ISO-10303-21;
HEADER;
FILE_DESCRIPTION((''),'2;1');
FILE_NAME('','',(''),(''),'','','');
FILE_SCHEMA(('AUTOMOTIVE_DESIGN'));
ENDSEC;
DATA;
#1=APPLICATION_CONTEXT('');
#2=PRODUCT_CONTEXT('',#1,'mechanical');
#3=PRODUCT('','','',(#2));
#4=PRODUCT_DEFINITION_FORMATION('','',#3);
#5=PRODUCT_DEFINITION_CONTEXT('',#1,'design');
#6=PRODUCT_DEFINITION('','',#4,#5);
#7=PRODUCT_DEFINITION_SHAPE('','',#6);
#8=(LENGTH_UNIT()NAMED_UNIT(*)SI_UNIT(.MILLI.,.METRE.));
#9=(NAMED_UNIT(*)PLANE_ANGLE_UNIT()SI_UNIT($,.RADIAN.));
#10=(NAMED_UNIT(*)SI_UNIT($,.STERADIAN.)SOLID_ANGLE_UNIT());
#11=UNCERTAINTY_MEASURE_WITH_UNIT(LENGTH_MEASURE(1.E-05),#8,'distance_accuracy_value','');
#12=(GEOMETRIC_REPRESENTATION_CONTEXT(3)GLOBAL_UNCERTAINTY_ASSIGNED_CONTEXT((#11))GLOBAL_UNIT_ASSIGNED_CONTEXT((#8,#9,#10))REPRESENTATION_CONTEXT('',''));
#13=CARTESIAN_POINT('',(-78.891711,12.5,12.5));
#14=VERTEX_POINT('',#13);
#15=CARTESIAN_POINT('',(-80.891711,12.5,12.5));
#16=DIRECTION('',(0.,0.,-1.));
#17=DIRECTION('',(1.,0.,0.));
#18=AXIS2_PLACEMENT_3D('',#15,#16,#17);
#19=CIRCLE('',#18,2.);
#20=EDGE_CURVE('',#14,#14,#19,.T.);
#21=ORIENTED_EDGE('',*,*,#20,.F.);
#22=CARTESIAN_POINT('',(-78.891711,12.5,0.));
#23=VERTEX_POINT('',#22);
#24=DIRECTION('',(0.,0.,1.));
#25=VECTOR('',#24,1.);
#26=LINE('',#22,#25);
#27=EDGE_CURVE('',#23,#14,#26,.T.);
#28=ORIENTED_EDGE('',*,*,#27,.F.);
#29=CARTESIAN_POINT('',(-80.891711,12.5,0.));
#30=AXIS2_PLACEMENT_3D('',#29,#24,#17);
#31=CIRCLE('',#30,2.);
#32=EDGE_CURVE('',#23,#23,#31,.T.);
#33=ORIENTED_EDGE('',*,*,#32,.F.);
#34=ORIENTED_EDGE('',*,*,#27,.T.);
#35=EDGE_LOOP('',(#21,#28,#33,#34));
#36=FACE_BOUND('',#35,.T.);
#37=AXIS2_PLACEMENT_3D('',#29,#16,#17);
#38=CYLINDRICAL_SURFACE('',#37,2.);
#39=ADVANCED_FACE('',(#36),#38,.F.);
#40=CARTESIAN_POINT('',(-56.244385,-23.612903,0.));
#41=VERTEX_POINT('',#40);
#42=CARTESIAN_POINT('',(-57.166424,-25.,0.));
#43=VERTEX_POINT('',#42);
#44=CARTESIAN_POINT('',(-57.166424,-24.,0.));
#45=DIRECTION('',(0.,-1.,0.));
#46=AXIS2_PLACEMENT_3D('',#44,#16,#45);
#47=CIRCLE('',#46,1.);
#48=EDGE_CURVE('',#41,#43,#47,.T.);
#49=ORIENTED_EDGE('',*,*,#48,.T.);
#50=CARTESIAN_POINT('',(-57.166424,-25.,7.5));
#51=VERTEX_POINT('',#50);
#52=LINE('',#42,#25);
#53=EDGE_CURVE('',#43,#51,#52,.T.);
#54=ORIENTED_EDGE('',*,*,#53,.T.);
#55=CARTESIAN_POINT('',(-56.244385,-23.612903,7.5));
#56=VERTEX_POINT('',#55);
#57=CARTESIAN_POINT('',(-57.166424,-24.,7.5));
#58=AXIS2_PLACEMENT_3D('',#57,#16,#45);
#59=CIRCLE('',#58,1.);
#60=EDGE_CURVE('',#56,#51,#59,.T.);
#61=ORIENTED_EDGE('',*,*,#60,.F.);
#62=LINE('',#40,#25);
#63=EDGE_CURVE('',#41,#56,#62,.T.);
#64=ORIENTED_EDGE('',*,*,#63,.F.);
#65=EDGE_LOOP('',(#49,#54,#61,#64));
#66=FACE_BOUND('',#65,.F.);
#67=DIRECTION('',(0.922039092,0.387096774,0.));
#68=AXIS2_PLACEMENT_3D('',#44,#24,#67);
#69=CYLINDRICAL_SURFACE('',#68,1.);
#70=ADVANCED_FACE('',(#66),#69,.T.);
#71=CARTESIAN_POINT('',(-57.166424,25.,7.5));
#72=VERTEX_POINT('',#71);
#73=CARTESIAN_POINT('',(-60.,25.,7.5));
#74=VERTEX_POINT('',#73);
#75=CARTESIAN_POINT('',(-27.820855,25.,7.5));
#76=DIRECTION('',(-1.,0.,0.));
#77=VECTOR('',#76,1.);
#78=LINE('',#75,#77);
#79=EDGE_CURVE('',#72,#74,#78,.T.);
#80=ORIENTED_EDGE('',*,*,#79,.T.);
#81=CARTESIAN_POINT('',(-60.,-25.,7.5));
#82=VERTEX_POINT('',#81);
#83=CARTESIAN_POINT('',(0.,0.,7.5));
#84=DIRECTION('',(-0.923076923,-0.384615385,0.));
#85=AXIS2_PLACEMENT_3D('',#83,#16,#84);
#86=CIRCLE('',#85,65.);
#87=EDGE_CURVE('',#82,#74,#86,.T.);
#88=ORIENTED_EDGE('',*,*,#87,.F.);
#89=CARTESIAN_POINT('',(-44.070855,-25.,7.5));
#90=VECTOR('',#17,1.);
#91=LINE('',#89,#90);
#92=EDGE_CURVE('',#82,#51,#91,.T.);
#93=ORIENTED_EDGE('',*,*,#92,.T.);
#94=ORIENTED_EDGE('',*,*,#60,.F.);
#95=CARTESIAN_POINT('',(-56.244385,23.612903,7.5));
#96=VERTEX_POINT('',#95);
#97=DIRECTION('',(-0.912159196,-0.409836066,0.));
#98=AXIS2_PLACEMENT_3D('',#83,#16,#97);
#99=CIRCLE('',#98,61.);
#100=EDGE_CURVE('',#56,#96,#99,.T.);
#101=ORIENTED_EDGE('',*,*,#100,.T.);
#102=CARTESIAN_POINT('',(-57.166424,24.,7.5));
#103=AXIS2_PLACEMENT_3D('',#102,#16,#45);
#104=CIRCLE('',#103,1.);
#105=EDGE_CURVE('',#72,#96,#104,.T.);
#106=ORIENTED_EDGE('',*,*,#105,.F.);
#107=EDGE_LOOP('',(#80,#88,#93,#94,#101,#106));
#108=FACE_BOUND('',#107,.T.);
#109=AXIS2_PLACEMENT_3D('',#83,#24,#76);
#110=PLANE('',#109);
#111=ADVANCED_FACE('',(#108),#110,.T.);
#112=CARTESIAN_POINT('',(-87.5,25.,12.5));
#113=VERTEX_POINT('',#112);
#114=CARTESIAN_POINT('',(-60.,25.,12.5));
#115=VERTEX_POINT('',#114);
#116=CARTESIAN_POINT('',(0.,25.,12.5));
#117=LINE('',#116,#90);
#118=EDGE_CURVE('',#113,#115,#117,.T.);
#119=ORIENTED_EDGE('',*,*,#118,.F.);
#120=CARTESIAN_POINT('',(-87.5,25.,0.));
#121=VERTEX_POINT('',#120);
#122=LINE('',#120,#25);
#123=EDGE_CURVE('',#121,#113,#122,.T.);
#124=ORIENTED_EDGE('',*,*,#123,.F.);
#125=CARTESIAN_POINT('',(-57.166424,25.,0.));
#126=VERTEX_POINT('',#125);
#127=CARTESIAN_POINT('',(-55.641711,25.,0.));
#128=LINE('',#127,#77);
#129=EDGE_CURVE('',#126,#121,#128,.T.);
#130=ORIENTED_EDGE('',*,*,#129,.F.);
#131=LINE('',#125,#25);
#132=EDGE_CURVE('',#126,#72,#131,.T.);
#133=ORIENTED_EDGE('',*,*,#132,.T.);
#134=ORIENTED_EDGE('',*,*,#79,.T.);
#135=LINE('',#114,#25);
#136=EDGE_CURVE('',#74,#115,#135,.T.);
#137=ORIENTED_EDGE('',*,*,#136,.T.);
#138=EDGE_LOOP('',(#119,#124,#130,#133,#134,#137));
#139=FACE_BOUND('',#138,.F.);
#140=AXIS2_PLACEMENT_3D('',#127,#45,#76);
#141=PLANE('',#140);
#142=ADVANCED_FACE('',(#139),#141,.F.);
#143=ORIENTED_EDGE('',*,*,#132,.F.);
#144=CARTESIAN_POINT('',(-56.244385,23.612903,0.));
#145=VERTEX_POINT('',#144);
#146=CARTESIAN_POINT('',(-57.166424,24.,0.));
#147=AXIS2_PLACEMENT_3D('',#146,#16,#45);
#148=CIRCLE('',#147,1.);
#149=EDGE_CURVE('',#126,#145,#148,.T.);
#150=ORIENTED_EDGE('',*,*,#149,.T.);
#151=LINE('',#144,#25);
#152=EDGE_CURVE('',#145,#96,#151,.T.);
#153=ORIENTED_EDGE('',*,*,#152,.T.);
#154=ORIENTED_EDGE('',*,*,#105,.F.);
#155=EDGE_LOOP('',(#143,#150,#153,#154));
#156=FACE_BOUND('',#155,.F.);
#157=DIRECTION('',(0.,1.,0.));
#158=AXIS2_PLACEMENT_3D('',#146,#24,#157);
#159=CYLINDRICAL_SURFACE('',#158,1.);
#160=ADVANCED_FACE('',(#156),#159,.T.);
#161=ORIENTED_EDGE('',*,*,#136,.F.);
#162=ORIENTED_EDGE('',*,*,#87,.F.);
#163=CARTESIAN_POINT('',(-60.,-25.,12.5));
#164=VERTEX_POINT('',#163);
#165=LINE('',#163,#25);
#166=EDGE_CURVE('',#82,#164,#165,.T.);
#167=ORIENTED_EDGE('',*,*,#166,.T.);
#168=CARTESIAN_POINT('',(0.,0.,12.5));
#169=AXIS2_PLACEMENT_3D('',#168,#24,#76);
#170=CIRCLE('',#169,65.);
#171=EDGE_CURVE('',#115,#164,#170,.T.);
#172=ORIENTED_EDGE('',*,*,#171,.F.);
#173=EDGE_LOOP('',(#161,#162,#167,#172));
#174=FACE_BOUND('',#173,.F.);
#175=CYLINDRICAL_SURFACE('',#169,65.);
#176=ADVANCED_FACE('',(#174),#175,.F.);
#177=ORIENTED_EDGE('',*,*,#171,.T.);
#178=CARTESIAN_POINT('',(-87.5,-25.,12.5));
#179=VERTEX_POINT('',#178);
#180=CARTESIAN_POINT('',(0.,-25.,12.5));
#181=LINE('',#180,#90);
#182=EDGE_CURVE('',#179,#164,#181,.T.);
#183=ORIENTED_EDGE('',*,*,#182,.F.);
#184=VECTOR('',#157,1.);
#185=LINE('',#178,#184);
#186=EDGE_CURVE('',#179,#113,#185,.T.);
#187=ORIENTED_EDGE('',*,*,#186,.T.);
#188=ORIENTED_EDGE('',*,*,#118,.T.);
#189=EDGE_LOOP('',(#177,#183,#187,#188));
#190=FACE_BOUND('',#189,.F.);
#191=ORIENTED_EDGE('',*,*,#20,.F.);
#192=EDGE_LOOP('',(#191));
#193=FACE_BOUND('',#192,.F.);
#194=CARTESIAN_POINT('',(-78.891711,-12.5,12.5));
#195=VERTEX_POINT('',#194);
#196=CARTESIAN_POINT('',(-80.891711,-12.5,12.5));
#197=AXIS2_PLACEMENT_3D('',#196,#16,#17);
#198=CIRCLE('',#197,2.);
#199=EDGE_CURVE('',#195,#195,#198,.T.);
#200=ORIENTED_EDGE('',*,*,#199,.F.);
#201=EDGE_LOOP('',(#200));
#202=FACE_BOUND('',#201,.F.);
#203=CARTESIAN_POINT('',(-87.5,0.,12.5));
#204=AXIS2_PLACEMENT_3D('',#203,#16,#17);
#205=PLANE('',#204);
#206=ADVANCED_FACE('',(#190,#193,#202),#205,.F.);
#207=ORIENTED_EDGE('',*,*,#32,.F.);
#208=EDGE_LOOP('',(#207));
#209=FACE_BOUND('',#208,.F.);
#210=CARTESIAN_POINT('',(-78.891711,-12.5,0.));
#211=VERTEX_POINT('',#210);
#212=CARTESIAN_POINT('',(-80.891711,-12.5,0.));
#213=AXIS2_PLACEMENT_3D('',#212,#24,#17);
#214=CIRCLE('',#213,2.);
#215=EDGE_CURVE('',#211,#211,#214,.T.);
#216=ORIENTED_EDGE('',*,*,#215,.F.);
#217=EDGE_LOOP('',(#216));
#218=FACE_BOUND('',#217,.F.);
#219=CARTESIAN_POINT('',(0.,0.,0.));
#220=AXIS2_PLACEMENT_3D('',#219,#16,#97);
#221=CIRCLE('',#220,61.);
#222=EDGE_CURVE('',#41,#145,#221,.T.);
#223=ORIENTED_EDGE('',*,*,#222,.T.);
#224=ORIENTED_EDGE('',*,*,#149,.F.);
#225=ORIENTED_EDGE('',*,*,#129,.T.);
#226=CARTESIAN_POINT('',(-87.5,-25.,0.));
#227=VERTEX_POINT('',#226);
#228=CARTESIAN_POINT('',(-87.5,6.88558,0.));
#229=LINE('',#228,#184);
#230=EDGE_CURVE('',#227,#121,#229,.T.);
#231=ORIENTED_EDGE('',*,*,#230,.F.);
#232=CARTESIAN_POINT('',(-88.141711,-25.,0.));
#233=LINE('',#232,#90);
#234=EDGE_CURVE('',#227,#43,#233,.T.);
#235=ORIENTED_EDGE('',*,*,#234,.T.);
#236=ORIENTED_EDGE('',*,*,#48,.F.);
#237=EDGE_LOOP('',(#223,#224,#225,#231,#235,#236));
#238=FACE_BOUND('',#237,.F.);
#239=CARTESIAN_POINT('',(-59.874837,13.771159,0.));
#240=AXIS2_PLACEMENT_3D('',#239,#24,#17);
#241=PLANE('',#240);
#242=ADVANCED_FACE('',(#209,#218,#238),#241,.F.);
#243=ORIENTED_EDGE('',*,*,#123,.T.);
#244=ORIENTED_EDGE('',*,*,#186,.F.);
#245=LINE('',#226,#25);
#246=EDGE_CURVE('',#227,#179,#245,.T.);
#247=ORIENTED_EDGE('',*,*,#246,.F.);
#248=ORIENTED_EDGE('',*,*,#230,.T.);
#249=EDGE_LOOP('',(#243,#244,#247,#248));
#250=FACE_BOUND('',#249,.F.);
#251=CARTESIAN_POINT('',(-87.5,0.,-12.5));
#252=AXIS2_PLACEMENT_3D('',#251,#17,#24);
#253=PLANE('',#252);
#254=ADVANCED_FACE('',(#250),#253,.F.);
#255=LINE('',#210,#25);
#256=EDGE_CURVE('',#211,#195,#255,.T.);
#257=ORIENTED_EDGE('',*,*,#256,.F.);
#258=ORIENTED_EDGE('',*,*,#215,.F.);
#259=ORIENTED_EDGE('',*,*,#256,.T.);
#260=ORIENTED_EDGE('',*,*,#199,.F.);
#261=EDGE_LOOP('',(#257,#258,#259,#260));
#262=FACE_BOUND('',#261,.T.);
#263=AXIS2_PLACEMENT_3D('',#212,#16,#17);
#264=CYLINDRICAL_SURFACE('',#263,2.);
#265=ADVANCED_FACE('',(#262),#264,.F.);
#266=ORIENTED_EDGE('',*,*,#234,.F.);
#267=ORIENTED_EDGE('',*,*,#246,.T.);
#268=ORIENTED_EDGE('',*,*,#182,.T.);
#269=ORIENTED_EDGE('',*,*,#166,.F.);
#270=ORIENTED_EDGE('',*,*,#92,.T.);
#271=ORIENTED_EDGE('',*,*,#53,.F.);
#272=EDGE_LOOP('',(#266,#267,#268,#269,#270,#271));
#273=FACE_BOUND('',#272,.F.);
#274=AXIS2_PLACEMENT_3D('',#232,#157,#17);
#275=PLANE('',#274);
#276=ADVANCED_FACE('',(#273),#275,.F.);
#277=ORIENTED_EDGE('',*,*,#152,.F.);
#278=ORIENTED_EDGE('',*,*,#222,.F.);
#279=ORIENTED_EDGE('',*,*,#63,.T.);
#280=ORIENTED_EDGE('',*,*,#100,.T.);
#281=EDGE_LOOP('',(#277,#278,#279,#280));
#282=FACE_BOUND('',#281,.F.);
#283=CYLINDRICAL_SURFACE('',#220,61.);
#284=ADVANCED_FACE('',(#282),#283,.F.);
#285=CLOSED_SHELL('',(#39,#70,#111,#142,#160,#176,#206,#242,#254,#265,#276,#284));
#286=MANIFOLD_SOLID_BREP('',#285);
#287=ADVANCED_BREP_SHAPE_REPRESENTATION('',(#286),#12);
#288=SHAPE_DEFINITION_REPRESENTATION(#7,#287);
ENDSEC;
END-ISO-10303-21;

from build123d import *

# Parameters (mm, degrees)
F0_W     = 27.141710973
F0_H     = 25
F0_R     = 2
F2_DEPTH = 25
F1_W     = 8
F1_H     = 10
F4_R     = 1
F5_W     = 175
F5_H     = 25
F6_DEPTH = 25


# Not quite as in the source:
# - a feature names something its author has since deleted; it is built from what else it names


with BuildPart() as f2:
    # F0 (on Top) → F2 (new body)
    with BuildSketch(Plane.XY):
        with BuildLine():
            ThreePointArc((-61, 0), (-59.6453869522, 12.7838888967), (-55.641710973, 25))
            Line((-55.641710973, 25), (-61, 25))
            Line((-61, 25), (-61, 0))
        make_face()
        with BuildLine():
            Line((-59.5, 19.1311264697), (-59.5, 23.5))
            Line((-59.5, 23.5), (-57.9137289423, 23.5))
            ThreePointArc((-57.9137289423, 23.5), (-58.7474910104, 21.3303141089), (-59.5, 19.1311264697))
        make_face(mode=Mode.SUBTRACT)
        with BuildLine():
            ThreePointArc((-55.641710973, -25), (-59.6453869522, -12.7838888967), (-61, 0))
            Line((-61, 0), (-61, -25))
            Line((-61, -25), (-55.641710973, -25))
        make_face()
        with BuildLine():
            Line((-57.9137289423, -23.5), (-59.5, -23.5))
            Line((-59.5, -23.5), (-59.5, -19.1311264697))
            ThreePointArc((-59.5, -19.1311264697), (-58.7474910104, -21.3303141089), (-57.9137289423, -23.5))
        make_face(mode=Mode.SUBTRACT)
        with Locations((-74.5708554865, -12.5)):
            Rectangle(F0_W, F0_H)
        with Locations((-80.891710973, -12.5)):
            Circle(F0_R, mode=Mode.SUBTRACT)
        with Locations((-74.5708554865, 12.5)):
            Rectangle(F0_W, F0_H)
        with Locations((-80.891710973, 12.5)):
            Circle(F0_R, mode=Mode.SUBTRACT)
        with BuildLine():
            Line((-57.9137289423, 23.5), (-59.5, 23.5))
            Line((-59.5, 23.5), (-59.5, 19.1311264697))
            ThreePointArc((-59.5, 19.1311264697), (-58.7474910104, 21.3303141089), (-57.9137289423, 23.5))
        make_face()
        with BuildLine():
            Line((-59.5, -19.1311264697), (-59.5, -23.5))
            Line((-59.5, -23.5), (-57.9137289423, -23.5))
            ThreePointArc((-57.9137289423, -23.5), (-58.7474910104, -21.3303141089), (-59.5, -19.1311264697))
        make_face()
    extrude(amount=F2_DEPTH)

    # F1 (on Front) → F3 (revolve, cut)
    with BuildSketch(Plane.XZ):
        with Locations((-61, 12.5)):
            Rectangle(F1_W, F1_H)
    revolve(axis=Axis((0, 0, 15.2043728158), (0, 0, 1)), mode=Mode.SUBTRACT)

    # F4
    f4_edges = [f2.edges().sort_by_distance(p)[0] for p in [
        (-55.641711, 25, 21.25),
        (-55.641711, 25, 3.75),
        (-55.641711, -25, 3.75),
        (-55.641711, -25, 21.25),
    ]]
    fillet(f4_edges, radius=F4_R)

    # F5 (on Front) → F6 (intersect, symmetric)
    with BuildSketch(Plane.XZ):
        Rectangle(F5_W, F5_H)
    extrude(amount=F6_DEPTH, both=True, mode=Mode.INTERSECT)


solid = f2.part
